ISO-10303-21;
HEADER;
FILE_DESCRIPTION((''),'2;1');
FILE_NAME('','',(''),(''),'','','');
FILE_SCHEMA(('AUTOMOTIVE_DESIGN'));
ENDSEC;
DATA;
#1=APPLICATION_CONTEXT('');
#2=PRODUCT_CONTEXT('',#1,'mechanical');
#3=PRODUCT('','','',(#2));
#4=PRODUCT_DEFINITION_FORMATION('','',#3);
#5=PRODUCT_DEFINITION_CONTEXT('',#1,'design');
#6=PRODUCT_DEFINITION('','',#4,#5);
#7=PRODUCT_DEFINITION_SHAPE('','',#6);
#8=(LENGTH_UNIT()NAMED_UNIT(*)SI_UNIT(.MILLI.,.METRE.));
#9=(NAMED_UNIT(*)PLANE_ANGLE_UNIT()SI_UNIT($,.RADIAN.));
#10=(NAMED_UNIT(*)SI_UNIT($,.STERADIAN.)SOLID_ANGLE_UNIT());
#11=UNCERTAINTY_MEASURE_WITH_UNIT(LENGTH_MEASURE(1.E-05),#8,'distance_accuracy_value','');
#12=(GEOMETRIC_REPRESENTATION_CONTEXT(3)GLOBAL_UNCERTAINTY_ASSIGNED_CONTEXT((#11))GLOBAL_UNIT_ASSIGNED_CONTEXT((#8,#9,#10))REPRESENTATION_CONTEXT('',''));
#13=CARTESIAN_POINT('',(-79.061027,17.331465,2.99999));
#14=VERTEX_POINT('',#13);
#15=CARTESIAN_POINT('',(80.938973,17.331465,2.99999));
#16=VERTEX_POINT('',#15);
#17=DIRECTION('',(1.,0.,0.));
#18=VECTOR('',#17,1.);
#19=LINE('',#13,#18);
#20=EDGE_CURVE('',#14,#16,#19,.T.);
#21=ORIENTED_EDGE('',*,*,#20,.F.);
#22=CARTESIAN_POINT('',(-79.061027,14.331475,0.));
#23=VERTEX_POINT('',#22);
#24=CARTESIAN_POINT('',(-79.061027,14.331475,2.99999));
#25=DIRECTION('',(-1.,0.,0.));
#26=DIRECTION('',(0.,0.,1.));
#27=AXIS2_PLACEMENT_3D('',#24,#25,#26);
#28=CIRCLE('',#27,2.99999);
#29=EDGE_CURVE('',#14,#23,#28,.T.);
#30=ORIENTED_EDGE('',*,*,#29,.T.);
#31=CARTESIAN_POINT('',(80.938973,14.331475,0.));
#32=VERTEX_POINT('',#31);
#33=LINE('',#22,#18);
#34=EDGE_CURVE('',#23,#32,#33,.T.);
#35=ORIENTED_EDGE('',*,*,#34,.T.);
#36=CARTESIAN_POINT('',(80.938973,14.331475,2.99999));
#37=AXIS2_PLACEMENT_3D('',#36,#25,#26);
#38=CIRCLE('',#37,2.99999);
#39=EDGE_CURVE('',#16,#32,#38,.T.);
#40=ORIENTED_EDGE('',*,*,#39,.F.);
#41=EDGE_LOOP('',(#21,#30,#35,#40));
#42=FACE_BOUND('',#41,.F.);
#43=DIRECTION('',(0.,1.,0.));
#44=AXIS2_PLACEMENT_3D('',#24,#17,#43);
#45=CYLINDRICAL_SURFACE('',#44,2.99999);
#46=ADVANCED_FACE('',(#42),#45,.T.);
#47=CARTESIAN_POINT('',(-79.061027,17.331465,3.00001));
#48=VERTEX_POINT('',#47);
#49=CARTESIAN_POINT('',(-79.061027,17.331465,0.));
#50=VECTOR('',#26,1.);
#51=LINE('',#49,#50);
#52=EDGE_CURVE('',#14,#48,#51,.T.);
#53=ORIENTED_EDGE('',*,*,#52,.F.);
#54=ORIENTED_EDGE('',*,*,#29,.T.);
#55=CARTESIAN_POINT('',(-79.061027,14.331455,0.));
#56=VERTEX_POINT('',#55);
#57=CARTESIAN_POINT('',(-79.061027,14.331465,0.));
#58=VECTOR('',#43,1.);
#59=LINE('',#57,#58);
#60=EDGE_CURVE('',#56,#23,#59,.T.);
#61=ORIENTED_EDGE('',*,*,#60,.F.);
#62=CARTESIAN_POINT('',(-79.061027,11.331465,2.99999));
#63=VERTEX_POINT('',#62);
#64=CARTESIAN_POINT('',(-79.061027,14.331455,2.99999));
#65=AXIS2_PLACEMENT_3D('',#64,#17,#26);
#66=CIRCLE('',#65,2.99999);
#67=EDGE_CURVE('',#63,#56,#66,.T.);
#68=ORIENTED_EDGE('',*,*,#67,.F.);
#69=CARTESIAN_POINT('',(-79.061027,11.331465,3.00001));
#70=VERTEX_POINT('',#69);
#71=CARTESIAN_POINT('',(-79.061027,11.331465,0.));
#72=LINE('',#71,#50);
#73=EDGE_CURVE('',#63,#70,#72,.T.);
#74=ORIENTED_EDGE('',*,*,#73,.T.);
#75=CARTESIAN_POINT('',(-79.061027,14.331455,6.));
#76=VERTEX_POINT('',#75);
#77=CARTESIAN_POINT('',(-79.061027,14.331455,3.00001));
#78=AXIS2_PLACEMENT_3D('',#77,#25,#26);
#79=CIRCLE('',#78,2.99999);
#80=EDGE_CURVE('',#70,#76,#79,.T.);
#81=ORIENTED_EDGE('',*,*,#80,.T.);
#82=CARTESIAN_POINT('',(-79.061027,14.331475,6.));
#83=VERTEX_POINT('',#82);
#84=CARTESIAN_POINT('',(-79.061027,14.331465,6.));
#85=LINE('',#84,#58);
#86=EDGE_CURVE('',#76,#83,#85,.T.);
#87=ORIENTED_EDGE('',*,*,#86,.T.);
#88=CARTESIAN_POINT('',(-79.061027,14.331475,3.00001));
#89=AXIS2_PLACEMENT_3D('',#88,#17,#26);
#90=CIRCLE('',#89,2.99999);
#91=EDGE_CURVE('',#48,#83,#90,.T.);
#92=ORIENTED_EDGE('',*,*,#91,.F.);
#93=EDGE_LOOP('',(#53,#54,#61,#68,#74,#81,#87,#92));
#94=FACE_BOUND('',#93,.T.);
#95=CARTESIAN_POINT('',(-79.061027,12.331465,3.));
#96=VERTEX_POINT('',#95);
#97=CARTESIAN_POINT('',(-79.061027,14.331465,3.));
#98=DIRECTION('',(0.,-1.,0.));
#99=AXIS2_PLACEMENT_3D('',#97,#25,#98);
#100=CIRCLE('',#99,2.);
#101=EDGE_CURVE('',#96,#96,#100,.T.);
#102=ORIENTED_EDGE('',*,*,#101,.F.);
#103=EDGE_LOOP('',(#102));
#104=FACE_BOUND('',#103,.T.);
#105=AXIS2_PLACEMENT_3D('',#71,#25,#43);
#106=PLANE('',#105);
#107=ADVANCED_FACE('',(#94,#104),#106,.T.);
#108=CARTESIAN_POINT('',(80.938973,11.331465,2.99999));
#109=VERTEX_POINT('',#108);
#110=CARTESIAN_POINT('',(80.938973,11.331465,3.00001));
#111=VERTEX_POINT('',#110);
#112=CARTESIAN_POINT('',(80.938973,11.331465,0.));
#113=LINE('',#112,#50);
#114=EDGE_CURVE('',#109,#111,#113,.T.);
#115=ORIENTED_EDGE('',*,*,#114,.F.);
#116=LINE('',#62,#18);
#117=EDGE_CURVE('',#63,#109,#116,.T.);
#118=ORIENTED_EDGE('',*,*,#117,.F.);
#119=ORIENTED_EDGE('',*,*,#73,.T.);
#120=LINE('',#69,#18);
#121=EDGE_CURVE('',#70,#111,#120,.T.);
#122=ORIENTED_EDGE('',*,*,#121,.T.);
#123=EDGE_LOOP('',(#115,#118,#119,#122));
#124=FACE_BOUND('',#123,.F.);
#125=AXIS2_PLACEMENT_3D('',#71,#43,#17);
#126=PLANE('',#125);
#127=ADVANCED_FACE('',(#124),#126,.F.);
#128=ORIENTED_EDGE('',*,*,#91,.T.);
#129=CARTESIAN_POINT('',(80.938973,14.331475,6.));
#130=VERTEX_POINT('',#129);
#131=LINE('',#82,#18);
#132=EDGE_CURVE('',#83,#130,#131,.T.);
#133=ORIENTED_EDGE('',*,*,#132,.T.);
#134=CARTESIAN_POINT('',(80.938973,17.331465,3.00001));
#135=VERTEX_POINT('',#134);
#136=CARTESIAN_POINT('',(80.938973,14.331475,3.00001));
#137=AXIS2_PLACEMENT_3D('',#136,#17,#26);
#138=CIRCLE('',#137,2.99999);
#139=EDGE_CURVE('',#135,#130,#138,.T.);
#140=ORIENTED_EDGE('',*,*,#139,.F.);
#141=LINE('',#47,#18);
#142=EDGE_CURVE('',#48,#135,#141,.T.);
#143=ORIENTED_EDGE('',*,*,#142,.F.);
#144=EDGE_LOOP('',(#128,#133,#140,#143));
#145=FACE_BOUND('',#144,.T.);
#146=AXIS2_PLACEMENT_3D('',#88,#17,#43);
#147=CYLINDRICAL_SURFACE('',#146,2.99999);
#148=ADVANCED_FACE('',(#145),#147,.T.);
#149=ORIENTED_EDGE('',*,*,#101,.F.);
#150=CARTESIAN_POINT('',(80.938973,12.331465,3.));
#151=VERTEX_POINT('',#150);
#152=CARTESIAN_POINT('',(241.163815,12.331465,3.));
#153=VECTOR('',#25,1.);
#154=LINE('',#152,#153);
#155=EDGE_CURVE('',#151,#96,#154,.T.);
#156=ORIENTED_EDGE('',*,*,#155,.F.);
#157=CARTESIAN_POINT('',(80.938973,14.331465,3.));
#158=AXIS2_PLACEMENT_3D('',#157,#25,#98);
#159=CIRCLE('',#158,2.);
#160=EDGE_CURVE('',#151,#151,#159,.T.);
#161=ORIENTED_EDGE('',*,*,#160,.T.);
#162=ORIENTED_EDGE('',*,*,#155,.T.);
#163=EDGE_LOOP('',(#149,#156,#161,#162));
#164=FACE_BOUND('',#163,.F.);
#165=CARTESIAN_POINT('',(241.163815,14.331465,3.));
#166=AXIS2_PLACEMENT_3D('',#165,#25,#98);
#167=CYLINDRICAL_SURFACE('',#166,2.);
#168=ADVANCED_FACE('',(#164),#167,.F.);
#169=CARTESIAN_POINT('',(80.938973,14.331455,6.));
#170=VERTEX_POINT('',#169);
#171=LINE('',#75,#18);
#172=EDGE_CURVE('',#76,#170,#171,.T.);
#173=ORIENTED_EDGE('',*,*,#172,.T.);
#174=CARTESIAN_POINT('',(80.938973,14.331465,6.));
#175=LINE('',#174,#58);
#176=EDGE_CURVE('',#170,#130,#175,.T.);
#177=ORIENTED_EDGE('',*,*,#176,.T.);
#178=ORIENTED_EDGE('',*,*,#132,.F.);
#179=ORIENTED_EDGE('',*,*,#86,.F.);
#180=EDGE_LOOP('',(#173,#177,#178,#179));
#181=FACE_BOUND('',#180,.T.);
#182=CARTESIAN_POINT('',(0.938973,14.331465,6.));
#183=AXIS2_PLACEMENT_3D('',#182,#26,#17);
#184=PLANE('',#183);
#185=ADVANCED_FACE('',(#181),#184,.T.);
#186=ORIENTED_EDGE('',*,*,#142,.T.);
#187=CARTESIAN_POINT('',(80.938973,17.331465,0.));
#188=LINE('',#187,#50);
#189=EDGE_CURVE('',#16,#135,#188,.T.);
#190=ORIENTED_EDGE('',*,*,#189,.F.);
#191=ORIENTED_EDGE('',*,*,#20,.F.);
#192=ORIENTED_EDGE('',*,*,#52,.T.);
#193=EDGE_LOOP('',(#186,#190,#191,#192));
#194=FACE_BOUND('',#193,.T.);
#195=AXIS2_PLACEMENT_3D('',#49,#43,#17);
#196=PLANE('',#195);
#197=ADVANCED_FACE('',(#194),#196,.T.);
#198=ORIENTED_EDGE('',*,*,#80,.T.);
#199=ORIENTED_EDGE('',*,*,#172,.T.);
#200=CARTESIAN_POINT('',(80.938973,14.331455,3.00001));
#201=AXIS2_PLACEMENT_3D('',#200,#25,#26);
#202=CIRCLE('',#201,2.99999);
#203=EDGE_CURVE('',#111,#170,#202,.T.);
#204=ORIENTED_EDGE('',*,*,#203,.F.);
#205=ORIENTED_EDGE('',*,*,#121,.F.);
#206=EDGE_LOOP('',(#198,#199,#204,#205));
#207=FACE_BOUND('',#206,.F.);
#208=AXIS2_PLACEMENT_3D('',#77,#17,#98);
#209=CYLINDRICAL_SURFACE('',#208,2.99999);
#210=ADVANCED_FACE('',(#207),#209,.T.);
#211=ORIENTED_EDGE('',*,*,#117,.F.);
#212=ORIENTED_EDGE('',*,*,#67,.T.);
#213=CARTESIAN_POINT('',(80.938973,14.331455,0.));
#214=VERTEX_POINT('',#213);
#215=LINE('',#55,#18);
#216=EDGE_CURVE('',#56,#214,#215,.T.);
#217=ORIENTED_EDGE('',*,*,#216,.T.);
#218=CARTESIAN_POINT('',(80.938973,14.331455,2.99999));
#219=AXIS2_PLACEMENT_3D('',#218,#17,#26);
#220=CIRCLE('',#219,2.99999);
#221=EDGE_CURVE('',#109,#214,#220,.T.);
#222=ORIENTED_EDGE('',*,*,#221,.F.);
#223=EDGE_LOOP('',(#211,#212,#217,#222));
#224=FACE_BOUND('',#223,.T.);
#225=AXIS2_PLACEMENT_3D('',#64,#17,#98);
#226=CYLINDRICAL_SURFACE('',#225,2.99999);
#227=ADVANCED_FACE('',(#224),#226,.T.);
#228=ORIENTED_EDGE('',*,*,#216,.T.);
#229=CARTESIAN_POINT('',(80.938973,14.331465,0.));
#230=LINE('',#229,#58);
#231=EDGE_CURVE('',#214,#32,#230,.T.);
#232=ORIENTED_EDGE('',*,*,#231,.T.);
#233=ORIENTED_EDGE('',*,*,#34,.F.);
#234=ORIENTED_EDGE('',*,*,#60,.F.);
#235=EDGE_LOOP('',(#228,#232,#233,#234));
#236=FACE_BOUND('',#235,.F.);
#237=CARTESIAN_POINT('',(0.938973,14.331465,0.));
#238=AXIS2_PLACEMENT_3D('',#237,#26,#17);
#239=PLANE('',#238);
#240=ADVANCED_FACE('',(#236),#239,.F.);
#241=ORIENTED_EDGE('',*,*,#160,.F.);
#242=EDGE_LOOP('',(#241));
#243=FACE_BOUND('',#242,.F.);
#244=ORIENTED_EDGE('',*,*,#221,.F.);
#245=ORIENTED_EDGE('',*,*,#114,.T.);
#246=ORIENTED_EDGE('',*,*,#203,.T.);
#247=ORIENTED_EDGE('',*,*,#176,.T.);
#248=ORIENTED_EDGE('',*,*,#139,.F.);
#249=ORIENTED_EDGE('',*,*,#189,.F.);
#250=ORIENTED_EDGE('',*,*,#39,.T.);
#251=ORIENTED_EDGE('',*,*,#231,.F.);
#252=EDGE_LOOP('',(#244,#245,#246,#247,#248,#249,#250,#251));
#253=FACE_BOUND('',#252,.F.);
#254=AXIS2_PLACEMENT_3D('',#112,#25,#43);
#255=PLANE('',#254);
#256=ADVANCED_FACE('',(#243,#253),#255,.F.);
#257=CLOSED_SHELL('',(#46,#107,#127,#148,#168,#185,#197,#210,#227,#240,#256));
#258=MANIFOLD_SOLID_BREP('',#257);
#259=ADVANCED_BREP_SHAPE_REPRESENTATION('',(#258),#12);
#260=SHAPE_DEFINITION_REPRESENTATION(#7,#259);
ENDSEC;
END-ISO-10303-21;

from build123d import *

# Parameters (mm, degrees)
F0_W     = 160
F0_H     = 6
F1_DEPTH = 6
F2_R     = 2.99999
F4_D     = 4


# Not quite as in the source:
# - a fillet or chamfer is up to 0.001 mm smaller than in the source, because OpenCascade refuses the exact size


with BuildPart() as f1:
    # F0 (on Top) → F1 (new body)
    with BuildSketch(Plane.XY):
        with Locations((0.9389727563, 14.3314650139)):
            Rectangle(F0_W, F0_H)
    extrude(amount=F1_DEPTH)

    # F2 (radius 3 in the source; OpenCascade refuses exactly that, so slightly less here)
    f2_edges = [f1.edges().sort_by_distance(p)[0] for p in [
        (0.938973, 17.331465, 6),
        (0.938973, 11.331465, 6),
        (0.938973, 17.331465, 0),
        (0.938973, 11.331465, 0),
    ]]
    fillet(f2_edges, radius=F2_R)

    # F4 (through all)
    with Locations(Plane.YZ.offset(80.9389727563)):
        with Locations((14.3314650139, 3)):
            Hole(F4_D / 2)


solid = f1.part
